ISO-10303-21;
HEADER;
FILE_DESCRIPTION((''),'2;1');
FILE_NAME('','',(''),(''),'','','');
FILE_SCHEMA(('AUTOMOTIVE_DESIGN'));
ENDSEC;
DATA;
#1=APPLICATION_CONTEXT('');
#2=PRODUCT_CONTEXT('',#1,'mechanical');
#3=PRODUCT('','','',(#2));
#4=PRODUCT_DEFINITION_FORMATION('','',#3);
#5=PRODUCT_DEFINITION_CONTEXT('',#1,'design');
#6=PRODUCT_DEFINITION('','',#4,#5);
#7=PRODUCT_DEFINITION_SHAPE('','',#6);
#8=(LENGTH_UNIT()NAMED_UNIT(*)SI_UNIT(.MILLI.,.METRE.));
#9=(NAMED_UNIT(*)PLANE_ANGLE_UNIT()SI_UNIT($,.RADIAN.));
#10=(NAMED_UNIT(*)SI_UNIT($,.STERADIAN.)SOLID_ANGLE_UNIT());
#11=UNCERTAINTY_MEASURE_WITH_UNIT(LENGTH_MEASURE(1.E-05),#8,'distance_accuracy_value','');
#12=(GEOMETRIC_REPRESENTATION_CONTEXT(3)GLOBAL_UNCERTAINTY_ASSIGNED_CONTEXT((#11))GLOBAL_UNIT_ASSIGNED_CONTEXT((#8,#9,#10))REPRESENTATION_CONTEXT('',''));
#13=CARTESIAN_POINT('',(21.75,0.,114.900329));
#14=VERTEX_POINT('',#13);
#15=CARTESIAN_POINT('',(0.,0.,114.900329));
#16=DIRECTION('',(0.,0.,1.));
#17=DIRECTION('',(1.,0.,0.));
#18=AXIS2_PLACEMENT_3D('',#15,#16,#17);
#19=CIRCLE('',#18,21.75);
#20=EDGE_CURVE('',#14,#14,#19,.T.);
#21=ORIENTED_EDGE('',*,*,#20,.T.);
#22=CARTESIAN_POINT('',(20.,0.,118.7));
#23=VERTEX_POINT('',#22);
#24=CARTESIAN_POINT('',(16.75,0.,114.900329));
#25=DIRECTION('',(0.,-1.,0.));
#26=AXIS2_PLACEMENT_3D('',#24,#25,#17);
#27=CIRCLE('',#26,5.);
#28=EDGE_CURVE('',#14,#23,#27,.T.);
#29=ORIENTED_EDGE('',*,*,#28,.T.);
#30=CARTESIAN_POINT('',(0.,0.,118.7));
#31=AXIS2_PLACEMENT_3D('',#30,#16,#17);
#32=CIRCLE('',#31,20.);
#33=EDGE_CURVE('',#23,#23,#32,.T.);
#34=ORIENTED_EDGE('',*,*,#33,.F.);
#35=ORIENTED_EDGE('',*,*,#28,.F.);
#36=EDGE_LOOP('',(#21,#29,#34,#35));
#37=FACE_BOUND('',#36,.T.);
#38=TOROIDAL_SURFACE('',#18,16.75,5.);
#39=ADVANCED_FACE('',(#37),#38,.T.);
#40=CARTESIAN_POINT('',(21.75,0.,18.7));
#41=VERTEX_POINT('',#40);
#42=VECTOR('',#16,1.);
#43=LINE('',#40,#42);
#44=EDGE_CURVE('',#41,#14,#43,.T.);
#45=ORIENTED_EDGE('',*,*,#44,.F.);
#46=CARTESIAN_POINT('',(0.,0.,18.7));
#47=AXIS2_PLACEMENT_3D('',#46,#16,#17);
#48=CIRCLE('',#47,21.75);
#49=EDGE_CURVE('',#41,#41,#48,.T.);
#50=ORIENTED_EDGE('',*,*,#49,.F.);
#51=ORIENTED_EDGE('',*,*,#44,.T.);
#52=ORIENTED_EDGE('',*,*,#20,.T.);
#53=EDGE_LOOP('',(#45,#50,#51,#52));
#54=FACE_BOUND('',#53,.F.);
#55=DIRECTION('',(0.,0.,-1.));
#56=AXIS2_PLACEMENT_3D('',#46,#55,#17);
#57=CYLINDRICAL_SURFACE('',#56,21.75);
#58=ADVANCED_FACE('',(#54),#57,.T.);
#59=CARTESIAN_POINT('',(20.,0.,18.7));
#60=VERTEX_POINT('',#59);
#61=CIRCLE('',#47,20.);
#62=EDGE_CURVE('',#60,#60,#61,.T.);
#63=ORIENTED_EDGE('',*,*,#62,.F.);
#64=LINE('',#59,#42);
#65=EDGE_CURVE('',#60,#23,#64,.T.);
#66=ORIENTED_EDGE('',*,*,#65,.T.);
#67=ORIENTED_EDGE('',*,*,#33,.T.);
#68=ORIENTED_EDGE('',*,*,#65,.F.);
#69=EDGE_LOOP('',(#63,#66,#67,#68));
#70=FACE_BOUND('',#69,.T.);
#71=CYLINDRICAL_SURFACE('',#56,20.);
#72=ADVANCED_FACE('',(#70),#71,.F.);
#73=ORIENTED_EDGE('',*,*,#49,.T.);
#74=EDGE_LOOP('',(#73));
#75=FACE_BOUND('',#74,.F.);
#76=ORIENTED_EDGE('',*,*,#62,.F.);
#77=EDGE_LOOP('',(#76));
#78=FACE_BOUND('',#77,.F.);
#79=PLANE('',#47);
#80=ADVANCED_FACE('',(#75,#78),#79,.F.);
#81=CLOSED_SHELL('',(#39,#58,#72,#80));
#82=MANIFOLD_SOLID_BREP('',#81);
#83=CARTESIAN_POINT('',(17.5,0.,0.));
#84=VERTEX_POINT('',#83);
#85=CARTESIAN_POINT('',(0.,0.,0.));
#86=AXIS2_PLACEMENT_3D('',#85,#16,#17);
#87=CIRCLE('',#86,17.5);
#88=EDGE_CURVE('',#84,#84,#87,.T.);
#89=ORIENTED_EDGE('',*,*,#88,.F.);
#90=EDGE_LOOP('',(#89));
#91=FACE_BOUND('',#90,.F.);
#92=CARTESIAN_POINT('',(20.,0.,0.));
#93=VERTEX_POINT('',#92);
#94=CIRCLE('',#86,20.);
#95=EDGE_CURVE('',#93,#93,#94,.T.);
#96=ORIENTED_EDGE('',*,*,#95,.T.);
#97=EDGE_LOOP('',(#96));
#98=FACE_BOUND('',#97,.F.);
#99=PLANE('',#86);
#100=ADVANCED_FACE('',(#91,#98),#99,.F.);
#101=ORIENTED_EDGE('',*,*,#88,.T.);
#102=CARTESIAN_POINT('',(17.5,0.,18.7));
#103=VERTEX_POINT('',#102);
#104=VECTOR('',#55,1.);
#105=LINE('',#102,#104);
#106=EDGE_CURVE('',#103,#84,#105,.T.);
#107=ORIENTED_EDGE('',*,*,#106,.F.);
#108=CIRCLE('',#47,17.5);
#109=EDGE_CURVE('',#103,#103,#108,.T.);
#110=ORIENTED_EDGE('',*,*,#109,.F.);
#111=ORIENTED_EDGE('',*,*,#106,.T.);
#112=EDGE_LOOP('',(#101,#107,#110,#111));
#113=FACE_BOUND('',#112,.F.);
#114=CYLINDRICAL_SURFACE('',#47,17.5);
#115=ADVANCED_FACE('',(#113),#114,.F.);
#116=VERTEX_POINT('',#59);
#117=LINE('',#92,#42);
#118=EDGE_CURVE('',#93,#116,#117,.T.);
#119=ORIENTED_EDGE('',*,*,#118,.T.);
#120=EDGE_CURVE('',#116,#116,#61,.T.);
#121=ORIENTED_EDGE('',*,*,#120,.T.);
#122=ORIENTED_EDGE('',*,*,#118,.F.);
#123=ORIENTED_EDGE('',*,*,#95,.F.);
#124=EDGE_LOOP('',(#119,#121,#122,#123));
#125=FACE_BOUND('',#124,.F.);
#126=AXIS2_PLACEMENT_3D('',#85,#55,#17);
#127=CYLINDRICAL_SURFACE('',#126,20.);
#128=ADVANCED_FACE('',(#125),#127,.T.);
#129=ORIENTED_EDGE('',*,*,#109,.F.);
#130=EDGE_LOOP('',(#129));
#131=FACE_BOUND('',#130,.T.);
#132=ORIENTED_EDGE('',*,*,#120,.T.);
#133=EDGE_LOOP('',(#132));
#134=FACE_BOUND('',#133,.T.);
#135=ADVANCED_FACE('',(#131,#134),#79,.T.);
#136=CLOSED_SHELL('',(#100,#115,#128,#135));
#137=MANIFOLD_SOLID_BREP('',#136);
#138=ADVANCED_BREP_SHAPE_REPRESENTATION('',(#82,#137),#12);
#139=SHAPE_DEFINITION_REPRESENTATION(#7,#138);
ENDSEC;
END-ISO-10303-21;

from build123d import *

# Parameters (mm, degrees)
F0_R     = 20
F1_DEPTH = 18.7
F2_R     = 21.75
F2_R_2   = 20
F3_DEPTH = 100
F4_R     = 17.5
F5_DEPTH = 25


# Not quite as in the source:
# - a fillet or chamfer that OpenCascade refuses, or shapes differently, is made with other operations: its cross-section is extruded or revolved along the edge and cut away or added


with BuildPart() as f1:
    # F0 (on Top) → F1 (new body)
    with BuildSketch(Plane.XY):
        Circle(F0_R)
    extrude(amount=F1_DEPTH)

    # F4 (on face) → F5 (cut)
    with BuildSketch(Plane.XY.offset(18.7)):
        Circle(F4_R)
    extrude(amount=-F5_DEPTH, mode=Mode.SUBTRACT)


with BuildPart() as f3:
    # F2 (on face) → F3 (new body)
    with BuildSketch(Plane.XY.offset(18.7)):
        Circle(F2_R)
        Circle(F2_R_2, mode=Mode.SUBTRACT)
    extrude(amount=F3_DEPTH)

    # F6: fillet of radius 5 on 1 edges, made by hand

    # F6_s1 → F6_t2 (revolve, cut)
    with BuildSketch(Plane.XZ):
        with BuildLine():
            ThreePointArc((21.75, 114.9003289616), (21.2914755311, 116.9919790279), (20, 118.7))
            Line((20, 118.7), (21.75, 118.7))
            Line((21.75, 118.7), (21.75, 114.9003289616))
        make_face()
    revolve(axis=Axis((0, 0, 118.7), (0, 0, 1)), mode=Mode.SUBTRACT)


solid = Compound([f1.part, f3.part])
